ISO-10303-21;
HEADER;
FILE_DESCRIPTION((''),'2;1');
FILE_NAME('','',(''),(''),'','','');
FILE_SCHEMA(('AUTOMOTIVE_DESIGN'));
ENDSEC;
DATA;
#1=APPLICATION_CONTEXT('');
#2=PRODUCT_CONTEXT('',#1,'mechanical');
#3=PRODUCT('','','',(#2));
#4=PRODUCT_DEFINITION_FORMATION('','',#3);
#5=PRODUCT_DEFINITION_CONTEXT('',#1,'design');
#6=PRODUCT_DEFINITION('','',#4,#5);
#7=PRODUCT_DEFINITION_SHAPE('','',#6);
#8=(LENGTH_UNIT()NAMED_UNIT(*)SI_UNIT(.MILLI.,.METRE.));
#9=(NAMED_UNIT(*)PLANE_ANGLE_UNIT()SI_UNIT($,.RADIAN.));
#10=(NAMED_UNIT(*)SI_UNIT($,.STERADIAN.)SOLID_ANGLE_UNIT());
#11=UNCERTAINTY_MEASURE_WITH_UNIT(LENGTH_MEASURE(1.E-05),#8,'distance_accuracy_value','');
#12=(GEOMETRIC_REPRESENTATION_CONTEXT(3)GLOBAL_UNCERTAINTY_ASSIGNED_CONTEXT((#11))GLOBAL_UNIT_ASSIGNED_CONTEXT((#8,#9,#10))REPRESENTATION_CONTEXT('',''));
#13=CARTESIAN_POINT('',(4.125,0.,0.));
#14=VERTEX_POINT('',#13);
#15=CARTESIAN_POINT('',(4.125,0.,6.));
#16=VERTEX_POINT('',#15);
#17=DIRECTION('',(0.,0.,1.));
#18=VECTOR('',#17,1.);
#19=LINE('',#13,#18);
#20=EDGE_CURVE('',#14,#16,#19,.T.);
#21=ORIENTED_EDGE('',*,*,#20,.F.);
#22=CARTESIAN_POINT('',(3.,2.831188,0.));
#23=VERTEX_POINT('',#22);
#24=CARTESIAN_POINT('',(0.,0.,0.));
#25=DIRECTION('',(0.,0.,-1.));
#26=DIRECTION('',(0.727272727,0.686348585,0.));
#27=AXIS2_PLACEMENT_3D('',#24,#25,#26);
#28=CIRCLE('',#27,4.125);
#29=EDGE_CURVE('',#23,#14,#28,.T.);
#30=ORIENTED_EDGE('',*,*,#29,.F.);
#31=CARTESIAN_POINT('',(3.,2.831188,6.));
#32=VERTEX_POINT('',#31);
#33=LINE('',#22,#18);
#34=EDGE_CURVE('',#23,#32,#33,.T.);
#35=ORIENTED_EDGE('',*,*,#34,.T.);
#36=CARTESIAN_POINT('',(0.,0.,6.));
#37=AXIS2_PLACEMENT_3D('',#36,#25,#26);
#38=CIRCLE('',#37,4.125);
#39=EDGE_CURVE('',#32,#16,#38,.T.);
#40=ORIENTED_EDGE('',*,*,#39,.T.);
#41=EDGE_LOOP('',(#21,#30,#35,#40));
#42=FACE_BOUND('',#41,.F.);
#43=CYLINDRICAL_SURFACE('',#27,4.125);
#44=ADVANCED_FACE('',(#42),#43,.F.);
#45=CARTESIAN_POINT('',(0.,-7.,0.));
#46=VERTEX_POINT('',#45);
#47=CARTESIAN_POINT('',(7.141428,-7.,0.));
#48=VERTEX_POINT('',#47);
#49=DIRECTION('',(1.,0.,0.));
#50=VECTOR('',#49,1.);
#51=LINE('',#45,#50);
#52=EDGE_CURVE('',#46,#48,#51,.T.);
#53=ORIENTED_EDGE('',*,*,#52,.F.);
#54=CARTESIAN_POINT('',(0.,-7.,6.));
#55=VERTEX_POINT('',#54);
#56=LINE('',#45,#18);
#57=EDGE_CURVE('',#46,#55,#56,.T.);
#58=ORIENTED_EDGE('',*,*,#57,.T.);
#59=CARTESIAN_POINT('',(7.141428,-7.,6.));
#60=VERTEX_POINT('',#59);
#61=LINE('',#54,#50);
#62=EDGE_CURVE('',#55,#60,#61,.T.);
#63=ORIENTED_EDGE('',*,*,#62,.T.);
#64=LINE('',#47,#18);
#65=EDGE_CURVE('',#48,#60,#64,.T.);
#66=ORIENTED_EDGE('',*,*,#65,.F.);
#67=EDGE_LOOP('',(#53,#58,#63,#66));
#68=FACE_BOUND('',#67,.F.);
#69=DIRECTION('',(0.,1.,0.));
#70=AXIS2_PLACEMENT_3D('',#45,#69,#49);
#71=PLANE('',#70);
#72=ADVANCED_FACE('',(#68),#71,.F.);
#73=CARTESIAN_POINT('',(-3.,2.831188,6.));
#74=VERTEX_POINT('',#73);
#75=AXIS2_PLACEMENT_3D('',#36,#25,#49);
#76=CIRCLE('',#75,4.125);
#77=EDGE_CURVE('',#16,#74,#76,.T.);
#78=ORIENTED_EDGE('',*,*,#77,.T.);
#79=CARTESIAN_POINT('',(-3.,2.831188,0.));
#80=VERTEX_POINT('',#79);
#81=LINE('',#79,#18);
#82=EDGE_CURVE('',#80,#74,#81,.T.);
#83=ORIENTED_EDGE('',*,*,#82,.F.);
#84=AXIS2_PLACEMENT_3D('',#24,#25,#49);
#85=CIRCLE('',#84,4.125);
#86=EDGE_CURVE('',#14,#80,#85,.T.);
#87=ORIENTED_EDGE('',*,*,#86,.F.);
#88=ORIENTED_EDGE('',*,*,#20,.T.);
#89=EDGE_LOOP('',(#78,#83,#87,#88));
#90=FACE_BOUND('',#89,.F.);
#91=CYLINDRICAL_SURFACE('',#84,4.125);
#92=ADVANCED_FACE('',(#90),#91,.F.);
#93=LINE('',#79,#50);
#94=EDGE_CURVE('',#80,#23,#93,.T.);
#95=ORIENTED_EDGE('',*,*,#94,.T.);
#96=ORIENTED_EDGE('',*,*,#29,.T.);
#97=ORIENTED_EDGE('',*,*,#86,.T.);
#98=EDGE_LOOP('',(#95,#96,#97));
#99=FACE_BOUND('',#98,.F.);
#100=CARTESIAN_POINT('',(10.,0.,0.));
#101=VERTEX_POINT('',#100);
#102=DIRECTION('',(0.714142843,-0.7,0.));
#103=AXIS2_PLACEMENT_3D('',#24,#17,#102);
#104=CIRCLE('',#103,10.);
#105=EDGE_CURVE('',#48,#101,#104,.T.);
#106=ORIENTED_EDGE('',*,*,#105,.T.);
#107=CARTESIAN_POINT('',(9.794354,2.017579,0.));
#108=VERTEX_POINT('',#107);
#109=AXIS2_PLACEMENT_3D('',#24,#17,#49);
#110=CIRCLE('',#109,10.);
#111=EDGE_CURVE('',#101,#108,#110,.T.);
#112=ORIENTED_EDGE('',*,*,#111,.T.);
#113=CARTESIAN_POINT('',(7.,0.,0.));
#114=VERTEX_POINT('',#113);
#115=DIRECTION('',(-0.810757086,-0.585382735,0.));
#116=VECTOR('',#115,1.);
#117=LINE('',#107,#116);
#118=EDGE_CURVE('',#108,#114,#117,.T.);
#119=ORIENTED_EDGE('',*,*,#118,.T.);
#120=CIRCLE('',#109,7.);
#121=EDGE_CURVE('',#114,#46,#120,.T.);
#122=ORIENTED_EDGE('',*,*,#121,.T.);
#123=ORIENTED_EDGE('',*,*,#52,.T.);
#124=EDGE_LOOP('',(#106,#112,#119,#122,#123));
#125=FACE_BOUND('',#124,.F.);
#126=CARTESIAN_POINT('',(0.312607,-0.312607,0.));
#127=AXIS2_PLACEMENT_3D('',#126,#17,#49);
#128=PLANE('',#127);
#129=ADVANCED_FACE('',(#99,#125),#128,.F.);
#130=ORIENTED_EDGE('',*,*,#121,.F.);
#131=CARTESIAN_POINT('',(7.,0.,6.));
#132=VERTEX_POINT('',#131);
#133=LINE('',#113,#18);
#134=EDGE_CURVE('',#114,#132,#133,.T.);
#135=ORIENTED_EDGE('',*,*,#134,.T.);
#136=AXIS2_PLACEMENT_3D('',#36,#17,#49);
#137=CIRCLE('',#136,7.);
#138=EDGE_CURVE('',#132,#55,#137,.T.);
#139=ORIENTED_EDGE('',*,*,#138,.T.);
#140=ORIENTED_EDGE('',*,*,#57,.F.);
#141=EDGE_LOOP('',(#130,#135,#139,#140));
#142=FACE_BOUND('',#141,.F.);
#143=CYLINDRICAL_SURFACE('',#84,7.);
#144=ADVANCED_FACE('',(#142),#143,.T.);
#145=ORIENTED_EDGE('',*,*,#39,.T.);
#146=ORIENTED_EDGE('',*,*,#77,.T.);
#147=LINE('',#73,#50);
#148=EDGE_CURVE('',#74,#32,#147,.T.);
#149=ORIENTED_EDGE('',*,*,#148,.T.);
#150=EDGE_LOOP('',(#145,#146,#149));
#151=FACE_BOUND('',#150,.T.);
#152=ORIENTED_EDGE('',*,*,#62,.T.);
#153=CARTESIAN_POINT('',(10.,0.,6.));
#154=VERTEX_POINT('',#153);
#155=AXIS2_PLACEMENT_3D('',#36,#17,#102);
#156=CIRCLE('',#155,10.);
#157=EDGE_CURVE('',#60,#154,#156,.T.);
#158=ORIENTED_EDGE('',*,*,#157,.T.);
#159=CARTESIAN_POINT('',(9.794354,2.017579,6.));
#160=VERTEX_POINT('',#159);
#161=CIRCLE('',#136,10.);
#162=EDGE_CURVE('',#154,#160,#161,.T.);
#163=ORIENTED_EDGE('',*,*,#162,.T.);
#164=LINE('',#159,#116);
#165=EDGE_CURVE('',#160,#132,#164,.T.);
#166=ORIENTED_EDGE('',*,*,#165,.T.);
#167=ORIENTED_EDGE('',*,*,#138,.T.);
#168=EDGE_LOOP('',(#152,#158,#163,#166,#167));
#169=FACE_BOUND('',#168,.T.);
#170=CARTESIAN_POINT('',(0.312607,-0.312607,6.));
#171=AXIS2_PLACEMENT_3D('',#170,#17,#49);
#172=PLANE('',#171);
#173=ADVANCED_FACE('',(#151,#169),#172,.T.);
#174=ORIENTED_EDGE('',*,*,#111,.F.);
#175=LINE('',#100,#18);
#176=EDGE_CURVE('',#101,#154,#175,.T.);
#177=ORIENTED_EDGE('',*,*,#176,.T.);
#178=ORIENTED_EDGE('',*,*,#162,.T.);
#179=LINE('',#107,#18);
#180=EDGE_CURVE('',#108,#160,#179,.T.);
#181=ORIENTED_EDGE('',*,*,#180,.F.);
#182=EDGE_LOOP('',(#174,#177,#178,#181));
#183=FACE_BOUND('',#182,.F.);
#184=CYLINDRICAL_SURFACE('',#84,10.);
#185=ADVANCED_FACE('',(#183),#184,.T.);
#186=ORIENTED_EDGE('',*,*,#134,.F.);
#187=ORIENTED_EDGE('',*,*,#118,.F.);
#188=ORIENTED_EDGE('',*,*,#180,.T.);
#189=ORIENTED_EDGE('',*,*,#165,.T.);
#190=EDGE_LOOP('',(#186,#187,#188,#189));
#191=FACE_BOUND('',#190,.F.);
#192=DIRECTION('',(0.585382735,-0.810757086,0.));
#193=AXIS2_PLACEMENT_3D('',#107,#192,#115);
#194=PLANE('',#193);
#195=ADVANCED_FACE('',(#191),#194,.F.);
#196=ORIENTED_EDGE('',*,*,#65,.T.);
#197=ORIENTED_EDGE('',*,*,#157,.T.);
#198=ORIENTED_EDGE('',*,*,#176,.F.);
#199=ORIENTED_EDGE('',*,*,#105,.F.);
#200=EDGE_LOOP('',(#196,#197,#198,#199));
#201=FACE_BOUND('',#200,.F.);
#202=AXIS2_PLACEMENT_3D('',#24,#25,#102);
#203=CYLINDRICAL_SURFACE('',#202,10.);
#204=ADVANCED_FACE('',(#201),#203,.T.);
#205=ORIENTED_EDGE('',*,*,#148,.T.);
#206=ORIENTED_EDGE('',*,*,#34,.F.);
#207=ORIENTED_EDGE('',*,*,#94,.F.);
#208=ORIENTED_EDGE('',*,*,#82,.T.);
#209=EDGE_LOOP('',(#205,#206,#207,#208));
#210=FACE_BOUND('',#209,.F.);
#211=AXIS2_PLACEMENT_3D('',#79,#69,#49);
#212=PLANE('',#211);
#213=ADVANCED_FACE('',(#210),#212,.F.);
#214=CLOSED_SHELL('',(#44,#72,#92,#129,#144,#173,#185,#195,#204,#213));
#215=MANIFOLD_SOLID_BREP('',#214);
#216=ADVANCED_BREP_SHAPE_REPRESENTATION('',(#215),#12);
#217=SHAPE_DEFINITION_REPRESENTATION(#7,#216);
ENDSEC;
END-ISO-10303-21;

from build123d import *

# Parameters (mm, degrees)
F1_DEPTH = 6


# Not quite as in the source:
# - a feature names something its author has since deleted; it is built from what else it names


with BuildPart() as f1:
    # F0 (on Top) → F1 (new body)
    with BuildSketch(Plane.XY):
        with BuildLine():
            ThreePointArc((0, -7), (4.9497474683, -4.9497474683), (7, 0))
            ThreePointArc((7, 0), (-4.9497474683, 4.9497474683), (0, -7))
        make_face()
        with BuildLine():
            ThreePointArc((3, 2.8311879132), (3.8334465563, 1.5232572009), (4.125, 0))
            ThreePointArc((4.125, 0), (-1.5232572009, -3.8334465563), (-3, 2.8311879132))
            ThreePointArc((-3, 2.8311879132), (0, 4.125), (3, 2.8311879132))
        make_face(mode=Mode.SUBTRACT)
        with BuildLine():
            Line((-3, 2.8311879132), (3, 2.8311879132))
            ThreePointArc((3, 2.8311879132), (0, 4.125), (-3, 2.8311879132))
        make_face()
        with BuildLine():
            ThreePointArc((7.1414284285, -7), (9.2578151927, -3.7805896177), (10, 0))
            ThreePointArc((10, 0), (9.9484557051, 1.0140163134), (9.7943541832, 2.0175792755))
            Line((9.7943541832, 2.0175792755), (7, 0))
            ThreePointArc((7, 0), (4.9497474683, -4.9497474683), (0, -7))
            Line((0, -7), (7.1414284285, -7))
        make_face()
    extrude(amount=F1_DEPTH)


solid = f1.part
